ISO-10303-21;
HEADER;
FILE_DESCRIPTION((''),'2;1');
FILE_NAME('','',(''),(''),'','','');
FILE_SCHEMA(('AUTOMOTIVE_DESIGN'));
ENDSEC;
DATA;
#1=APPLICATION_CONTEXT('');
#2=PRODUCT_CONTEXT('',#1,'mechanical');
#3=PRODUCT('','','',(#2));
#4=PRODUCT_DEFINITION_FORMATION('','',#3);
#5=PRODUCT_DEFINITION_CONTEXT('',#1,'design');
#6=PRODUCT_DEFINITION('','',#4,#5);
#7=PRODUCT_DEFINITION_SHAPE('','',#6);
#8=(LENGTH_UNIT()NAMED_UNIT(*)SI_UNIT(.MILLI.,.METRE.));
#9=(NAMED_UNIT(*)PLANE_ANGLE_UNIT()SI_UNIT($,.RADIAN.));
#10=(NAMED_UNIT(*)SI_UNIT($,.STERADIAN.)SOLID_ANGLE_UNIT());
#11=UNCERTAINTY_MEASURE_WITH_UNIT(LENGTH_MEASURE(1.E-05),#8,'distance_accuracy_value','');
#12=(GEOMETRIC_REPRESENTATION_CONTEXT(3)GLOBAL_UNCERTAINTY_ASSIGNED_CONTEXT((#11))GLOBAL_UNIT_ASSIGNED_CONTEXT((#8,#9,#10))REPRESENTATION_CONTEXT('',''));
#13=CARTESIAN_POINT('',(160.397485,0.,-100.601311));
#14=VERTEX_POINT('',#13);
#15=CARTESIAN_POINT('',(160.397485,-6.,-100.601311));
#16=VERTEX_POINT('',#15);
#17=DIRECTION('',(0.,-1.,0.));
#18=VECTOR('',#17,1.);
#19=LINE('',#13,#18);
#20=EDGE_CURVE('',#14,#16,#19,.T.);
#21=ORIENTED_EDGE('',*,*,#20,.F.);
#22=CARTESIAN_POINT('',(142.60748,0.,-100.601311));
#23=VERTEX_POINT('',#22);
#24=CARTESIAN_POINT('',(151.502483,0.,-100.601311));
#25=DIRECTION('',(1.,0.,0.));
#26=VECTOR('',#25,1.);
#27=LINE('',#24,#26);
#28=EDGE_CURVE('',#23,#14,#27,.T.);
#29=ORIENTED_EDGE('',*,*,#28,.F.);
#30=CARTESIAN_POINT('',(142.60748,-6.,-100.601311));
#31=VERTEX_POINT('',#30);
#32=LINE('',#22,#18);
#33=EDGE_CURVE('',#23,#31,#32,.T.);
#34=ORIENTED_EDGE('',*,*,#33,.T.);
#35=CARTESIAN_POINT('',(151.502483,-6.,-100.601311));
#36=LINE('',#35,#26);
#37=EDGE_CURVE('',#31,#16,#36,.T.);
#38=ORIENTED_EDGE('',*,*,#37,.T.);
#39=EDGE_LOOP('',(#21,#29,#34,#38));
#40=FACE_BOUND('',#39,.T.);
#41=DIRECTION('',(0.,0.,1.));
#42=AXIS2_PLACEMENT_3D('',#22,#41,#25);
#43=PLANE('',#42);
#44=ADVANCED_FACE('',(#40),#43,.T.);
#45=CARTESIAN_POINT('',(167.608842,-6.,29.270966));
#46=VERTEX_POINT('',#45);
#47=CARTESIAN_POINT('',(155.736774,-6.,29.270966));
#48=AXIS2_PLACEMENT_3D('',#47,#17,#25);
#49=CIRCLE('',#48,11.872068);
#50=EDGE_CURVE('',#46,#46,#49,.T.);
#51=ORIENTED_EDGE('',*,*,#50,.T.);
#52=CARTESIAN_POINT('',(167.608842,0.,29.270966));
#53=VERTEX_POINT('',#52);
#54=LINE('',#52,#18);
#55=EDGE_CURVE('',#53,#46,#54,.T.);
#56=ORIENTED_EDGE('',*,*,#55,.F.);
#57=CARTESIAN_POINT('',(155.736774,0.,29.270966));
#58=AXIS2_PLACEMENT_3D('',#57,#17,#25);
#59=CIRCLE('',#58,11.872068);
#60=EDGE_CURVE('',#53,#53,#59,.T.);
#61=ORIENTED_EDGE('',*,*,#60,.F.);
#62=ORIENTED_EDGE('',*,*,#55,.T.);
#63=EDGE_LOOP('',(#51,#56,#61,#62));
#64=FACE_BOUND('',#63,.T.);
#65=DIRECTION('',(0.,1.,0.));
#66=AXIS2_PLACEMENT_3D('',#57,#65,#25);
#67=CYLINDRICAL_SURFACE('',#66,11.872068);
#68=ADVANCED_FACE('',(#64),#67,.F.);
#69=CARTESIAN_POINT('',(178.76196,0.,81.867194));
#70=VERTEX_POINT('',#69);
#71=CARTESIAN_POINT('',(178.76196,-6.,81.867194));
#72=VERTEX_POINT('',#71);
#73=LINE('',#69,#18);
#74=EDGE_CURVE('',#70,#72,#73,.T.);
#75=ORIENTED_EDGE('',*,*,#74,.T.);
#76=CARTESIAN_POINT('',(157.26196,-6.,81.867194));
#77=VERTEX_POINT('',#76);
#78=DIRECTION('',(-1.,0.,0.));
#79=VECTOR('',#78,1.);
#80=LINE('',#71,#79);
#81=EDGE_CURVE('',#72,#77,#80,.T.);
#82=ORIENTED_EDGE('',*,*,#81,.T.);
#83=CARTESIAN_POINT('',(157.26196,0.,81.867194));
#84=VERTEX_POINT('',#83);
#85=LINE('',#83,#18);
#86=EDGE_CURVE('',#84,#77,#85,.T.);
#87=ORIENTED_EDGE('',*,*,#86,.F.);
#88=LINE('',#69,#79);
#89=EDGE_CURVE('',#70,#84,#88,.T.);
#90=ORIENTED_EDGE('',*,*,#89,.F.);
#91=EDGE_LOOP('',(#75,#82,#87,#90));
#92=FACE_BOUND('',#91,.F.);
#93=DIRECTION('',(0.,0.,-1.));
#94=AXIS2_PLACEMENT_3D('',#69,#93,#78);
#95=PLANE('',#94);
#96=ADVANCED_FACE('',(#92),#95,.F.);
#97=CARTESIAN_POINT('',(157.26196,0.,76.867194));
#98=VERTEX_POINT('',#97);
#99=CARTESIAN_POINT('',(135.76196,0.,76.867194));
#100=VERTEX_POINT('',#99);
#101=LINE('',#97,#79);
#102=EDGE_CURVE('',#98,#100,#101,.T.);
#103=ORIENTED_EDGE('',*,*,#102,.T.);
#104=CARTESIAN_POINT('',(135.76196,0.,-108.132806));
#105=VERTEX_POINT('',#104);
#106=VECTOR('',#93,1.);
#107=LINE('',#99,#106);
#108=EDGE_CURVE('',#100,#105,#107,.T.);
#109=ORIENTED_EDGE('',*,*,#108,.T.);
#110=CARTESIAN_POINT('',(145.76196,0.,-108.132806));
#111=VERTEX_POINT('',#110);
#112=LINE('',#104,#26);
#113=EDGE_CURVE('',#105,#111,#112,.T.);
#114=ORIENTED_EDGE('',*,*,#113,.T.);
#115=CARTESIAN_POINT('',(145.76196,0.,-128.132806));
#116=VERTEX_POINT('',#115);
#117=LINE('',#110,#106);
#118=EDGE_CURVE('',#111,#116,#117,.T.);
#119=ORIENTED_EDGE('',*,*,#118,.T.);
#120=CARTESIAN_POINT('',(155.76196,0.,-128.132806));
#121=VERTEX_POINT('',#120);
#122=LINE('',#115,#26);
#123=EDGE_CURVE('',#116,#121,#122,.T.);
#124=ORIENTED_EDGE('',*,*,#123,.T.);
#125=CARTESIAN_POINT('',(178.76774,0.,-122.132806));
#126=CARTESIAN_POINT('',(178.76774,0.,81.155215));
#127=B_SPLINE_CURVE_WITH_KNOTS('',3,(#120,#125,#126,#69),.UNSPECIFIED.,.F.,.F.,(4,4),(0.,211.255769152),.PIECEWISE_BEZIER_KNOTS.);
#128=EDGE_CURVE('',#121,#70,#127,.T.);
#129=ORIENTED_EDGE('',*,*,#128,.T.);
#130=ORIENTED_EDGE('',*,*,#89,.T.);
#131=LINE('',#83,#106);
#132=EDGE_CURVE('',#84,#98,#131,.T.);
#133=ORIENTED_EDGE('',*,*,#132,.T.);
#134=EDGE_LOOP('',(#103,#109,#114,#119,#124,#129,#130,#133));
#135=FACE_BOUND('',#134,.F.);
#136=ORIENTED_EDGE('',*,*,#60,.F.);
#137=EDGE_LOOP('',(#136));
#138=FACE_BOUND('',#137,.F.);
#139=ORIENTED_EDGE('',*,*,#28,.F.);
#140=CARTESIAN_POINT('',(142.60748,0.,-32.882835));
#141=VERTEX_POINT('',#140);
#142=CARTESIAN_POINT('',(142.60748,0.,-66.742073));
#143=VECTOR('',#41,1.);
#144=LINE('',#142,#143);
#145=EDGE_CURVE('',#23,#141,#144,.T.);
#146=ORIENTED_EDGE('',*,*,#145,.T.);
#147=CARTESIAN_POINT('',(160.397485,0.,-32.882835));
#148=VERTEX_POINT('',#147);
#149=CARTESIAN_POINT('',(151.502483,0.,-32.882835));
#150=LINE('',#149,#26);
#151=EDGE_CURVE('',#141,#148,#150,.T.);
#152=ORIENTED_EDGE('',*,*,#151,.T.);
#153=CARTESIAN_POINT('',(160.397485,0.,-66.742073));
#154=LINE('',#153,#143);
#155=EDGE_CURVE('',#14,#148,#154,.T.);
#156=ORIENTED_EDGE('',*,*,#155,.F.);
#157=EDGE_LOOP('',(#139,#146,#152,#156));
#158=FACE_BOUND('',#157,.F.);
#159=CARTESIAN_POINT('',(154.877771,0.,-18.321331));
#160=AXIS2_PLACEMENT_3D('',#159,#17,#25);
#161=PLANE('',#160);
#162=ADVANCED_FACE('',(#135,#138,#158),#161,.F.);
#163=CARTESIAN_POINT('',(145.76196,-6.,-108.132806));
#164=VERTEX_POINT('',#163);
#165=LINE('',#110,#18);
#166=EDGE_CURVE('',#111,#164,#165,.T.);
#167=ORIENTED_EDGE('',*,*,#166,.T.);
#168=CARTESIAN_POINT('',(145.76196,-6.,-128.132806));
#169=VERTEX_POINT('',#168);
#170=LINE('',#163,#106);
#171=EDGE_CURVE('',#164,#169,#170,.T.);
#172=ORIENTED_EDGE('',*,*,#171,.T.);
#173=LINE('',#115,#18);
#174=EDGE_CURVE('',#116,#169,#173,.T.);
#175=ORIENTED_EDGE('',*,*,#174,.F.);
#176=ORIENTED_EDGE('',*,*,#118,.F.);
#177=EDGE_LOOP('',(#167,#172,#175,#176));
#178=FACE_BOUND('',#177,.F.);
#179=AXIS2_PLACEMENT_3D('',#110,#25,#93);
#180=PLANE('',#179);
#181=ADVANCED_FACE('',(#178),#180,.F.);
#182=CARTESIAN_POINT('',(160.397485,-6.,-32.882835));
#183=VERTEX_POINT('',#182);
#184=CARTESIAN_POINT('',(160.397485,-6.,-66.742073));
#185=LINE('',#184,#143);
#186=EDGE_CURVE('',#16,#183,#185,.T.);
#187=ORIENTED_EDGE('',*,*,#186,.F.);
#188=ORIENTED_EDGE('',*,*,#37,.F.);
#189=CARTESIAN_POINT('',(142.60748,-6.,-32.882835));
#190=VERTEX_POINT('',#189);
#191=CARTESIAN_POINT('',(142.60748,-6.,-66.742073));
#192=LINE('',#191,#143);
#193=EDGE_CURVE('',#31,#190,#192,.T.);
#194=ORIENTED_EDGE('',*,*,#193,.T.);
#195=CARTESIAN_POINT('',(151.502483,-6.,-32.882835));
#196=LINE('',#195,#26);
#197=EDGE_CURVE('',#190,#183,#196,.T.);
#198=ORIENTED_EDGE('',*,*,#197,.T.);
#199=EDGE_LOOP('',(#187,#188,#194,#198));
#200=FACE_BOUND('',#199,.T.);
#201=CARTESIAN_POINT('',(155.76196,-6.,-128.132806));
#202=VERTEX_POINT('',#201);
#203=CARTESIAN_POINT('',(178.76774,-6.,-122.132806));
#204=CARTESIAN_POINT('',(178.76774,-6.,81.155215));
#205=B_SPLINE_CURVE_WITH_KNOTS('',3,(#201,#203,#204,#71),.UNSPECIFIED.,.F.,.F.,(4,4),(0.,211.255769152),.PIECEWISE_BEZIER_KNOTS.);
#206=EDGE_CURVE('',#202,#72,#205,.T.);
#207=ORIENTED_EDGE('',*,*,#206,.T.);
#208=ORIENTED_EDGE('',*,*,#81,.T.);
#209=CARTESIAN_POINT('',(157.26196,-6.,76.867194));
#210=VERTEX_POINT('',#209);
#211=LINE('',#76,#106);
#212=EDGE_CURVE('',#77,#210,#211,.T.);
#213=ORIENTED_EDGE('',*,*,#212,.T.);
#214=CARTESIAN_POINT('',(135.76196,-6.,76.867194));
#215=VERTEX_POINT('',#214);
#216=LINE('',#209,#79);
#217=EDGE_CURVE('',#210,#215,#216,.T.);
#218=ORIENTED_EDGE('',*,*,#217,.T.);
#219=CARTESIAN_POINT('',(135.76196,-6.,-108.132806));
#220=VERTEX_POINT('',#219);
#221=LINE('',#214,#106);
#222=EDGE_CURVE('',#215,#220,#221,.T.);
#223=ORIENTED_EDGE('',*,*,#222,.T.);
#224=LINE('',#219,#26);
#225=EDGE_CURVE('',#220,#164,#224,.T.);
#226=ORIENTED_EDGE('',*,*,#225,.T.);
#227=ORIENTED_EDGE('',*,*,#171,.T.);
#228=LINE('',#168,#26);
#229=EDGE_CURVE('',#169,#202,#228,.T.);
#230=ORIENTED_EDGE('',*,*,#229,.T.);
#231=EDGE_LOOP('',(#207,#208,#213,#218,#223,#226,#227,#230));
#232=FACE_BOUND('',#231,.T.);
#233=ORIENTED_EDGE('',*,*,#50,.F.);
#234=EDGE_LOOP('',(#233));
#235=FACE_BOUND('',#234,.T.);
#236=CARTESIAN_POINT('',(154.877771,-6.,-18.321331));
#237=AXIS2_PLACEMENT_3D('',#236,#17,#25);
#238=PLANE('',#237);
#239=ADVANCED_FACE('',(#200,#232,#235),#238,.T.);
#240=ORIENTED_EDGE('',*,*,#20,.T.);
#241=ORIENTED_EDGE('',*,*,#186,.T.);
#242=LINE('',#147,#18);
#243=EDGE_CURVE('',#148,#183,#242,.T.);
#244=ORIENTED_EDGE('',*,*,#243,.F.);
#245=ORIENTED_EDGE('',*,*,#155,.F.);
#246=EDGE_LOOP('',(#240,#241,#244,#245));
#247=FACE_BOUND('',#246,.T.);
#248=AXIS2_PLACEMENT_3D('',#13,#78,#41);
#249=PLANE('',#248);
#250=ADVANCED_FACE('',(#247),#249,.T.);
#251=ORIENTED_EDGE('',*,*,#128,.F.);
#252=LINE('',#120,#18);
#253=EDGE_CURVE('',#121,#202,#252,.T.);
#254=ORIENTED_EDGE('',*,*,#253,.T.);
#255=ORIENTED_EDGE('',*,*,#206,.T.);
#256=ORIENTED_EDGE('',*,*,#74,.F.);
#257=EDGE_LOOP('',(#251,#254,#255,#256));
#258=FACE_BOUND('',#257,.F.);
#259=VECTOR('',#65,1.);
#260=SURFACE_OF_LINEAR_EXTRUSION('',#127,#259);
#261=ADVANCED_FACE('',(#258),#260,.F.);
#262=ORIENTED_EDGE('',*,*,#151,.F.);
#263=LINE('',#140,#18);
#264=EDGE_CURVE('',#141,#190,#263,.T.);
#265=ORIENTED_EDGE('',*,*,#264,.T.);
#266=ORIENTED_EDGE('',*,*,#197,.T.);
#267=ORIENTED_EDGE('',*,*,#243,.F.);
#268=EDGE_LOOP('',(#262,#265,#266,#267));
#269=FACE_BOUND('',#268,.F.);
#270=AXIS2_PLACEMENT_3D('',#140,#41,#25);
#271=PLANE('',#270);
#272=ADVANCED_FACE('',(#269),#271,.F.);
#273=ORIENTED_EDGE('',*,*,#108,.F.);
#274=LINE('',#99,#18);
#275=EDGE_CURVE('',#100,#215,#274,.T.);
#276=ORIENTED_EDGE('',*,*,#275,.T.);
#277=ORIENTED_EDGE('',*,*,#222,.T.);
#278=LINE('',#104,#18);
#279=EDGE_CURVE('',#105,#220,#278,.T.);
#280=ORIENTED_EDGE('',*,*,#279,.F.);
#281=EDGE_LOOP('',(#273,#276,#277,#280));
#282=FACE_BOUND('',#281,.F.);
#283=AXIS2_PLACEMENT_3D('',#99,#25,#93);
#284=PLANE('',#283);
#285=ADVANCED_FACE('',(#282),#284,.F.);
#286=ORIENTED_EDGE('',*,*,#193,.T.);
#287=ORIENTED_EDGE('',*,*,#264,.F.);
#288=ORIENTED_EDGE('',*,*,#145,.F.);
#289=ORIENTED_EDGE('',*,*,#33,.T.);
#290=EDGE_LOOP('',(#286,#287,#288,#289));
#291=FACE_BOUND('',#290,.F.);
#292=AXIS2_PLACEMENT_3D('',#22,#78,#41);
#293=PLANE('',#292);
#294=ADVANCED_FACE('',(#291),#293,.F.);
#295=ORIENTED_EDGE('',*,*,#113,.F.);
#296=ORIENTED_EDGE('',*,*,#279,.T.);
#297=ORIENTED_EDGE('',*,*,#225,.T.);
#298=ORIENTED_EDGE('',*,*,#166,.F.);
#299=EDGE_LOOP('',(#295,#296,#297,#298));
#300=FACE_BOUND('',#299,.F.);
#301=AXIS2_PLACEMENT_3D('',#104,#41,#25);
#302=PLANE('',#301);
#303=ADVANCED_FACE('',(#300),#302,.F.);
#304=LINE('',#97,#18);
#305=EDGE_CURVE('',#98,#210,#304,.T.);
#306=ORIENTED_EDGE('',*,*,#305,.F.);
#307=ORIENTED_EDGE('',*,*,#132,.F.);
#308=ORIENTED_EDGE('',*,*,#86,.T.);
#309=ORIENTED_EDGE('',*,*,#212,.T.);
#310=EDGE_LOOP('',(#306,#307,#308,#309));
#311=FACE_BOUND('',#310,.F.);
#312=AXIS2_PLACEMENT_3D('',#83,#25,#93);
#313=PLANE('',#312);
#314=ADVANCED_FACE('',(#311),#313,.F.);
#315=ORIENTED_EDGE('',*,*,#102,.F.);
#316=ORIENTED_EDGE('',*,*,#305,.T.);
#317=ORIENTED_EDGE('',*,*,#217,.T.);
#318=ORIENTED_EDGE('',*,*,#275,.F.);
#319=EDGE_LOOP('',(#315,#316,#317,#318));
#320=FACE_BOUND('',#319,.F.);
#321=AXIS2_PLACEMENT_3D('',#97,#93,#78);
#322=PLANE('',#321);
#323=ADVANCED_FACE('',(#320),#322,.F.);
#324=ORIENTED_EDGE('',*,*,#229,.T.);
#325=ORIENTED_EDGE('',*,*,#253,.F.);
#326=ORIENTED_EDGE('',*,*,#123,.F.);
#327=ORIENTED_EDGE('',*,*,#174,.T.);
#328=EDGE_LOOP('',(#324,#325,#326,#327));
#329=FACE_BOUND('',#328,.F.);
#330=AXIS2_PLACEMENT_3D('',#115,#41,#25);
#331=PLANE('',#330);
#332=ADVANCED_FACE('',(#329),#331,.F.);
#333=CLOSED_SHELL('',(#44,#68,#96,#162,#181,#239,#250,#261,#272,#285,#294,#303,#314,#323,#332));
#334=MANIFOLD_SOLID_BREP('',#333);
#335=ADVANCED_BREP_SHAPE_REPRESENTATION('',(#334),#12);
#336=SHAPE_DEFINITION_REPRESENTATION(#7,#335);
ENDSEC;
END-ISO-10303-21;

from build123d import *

# Parameters (mm, degrees)
F0_W     = 17.790004611
F0_H     = 67.7184760571
F0_R     = 11.8720680475
F1_DEPTH = 6


# Not quite as in the source:
# - a feature names something its author has since deleted; it is built from what else it names


with BuildPart() as f1:
    # F0 (on Front) → F1 (new body)
    with BuildSketch(Plane.XZ):
        with BuildLine():
            add(Edge.make_bspline(
                [(155.761959786, -128.1328057871), (178.7677402867, -122.1328057871), (178.7677402867, 81.1552154075), (178.761959786, 81.8671942129)],
                knots=[0, 0, 0, 0, 211.255769152, 211.255769152, 211.255769152, 211.255769152], degree=3))
            Line((178.761959786, 81.8671942129), (157.261959786, 81.8671942129))
            Line((157.261959786, 81.8671942129), (157.261959786, 76.8671942129))
            Line((157.261959786, 76.8671942129), (135.761959786, 76.8671942129))
            Line((135.761959786, 76.8671942129), (135.761959786, -108.1328057871))
            Line((135.761959786, -108.1328057871), (145.761959786, -108.1328057871))
            Line((145.761959786, -108.1328057871), (145.761959786, -128.1328057871))
            Line((145.761959786, -128.1328057871), (155.761959786, -128.1328057871))
        make_face()
        with Locations((151.5024825931, -66.7420731425)):
            Rectangle(F0_W, F0_H, mode=Mode.SUBTRACT)
        with Locations((155.7367742062, 29.270966208)):
            Circle(F0_R, mode=Mode.SUBTRACT)
    extrude(amount=F1_DEPTH)


solid = f1.part
